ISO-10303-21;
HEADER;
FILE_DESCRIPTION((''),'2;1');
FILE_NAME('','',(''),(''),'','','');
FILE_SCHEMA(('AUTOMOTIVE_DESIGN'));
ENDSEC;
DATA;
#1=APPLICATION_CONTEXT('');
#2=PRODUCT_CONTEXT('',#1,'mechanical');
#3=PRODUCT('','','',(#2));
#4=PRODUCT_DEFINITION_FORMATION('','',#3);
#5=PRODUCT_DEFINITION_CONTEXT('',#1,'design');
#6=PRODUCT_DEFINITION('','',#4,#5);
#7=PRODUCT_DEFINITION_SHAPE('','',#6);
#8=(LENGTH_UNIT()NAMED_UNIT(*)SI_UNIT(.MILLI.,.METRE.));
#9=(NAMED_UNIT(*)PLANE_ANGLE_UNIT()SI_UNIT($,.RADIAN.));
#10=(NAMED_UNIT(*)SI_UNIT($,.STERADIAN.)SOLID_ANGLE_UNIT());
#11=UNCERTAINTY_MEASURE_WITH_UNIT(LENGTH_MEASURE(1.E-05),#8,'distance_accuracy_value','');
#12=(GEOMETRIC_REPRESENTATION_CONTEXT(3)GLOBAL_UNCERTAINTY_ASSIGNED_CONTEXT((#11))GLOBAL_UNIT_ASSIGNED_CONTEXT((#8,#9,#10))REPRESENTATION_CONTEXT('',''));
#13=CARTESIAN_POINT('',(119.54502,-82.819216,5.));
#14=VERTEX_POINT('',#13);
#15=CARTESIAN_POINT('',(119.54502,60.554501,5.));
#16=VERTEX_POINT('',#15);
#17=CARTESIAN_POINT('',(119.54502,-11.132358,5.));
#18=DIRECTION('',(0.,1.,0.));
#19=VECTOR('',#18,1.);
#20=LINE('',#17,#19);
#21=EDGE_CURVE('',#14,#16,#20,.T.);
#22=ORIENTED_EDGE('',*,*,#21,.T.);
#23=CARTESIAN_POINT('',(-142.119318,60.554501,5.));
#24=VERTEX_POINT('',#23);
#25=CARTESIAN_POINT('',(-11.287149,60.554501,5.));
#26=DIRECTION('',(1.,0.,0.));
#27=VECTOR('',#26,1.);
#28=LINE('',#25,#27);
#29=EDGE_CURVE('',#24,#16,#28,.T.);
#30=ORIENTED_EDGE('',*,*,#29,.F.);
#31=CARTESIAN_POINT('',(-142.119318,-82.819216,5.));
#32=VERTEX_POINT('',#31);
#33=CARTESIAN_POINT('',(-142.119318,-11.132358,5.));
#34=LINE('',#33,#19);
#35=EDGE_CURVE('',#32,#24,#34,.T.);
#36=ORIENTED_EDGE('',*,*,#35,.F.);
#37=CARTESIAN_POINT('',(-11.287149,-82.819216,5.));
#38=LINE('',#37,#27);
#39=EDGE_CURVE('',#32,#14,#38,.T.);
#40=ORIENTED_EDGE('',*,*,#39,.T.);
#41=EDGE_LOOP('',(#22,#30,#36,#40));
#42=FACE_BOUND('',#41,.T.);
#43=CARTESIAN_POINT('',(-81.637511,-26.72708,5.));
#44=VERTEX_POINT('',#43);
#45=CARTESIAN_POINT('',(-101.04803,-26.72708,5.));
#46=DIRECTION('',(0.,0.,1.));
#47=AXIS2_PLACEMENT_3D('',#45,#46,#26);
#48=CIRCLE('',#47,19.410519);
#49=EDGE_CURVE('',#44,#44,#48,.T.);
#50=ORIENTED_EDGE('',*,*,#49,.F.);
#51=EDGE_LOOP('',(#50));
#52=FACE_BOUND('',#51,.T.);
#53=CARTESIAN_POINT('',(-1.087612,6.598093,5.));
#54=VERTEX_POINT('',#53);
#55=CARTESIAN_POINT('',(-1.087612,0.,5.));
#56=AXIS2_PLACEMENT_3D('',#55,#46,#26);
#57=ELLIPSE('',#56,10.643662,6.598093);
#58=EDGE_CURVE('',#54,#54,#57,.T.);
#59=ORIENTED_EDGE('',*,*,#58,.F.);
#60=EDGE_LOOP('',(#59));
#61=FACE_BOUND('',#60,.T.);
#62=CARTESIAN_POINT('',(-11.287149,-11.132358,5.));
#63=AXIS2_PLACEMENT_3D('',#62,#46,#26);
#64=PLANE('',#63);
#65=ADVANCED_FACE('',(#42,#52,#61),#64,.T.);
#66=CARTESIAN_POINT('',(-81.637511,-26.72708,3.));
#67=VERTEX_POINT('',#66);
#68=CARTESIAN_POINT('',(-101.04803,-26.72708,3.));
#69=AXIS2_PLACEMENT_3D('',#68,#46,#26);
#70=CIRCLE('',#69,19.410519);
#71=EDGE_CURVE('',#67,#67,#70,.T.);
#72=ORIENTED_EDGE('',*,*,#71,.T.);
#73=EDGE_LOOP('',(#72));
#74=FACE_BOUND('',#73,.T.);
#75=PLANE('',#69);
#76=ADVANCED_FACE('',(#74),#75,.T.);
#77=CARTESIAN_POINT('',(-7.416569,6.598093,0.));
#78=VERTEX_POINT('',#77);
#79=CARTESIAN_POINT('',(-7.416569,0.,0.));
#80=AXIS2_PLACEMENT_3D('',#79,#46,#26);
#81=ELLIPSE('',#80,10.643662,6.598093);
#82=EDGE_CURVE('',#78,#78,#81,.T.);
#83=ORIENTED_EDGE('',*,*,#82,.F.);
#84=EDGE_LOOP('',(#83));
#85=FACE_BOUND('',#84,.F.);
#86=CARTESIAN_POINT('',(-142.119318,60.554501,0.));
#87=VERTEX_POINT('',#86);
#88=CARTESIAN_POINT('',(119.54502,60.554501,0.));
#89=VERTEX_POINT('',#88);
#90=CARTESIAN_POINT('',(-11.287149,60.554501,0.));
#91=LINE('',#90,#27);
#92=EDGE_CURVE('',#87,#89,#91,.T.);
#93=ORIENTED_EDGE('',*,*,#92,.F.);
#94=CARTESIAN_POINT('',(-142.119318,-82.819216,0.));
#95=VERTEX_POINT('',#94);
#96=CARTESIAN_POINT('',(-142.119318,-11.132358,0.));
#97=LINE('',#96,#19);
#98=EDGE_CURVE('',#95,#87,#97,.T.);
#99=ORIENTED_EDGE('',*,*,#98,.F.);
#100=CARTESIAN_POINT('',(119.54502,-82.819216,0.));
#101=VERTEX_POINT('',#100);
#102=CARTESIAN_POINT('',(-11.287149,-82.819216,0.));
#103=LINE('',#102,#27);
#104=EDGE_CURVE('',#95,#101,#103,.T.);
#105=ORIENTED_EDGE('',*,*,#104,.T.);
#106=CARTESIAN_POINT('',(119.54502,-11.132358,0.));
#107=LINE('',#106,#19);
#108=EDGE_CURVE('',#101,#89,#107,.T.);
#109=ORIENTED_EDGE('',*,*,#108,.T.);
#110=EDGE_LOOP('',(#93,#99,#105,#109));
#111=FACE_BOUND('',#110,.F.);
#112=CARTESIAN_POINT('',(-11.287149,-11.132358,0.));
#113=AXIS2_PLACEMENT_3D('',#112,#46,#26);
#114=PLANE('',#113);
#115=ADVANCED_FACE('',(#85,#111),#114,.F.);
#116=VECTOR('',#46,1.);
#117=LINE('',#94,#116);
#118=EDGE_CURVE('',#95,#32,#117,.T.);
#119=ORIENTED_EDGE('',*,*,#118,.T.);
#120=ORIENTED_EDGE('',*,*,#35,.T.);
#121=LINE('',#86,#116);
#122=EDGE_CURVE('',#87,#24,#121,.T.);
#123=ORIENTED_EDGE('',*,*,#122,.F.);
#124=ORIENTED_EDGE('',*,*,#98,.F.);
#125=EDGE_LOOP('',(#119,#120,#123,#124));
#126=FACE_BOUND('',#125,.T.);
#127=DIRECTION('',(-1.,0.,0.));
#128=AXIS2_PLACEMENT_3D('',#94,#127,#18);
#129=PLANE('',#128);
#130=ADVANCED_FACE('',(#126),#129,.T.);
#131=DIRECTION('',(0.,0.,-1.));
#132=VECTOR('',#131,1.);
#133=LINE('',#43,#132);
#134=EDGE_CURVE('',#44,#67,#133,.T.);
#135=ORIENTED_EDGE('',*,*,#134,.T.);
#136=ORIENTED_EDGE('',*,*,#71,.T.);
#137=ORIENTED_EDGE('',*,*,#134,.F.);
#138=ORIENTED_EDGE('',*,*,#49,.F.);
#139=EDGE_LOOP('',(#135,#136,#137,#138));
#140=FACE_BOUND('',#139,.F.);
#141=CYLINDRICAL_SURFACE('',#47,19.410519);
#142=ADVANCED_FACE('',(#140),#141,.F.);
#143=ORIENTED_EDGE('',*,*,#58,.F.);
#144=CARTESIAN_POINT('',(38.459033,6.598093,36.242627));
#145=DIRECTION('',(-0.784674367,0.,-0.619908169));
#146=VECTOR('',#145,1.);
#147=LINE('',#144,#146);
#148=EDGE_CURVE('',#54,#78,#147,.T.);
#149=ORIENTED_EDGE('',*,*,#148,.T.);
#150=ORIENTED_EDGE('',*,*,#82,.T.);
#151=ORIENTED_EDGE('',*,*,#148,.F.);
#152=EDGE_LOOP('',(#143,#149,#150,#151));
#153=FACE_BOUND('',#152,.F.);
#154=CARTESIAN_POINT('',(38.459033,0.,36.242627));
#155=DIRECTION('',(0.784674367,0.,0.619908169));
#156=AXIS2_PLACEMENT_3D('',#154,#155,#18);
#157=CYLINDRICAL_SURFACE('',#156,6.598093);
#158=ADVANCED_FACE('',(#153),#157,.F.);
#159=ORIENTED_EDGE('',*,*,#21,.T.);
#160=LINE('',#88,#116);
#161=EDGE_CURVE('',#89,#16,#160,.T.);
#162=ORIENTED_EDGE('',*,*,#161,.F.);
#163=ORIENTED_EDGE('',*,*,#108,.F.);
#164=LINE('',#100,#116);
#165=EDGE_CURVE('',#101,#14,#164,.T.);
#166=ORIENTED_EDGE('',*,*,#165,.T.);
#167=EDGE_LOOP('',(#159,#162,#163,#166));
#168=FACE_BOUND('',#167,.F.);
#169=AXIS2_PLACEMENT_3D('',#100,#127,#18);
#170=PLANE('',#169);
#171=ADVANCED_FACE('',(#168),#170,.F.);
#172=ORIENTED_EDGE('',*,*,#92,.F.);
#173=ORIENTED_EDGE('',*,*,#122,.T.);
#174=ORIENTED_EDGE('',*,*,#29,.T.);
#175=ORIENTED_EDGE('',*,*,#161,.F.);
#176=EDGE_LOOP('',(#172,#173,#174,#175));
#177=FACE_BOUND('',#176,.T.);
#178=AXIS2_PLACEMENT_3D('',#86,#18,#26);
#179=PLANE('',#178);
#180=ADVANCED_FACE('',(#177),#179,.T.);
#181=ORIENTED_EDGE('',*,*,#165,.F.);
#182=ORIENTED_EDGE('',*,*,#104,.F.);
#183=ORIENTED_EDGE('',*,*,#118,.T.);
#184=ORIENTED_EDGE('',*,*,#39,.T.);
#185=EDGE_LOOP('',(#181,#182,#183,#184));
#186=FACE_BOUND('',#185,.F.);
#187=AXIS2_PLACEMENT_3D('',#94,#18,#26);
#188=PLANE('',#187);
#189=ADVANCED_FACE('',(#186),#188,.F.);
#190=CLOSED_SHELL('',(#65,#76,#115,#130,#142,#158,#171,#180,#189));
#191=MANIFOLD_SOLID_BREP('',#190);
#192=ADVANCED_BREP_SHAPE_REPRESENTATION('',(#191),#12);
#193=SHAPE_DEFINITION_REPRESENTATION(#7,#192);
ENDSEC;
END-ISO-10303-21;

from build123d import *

# Parameters (mm, degrees)
F0_W     = 261.6643384099
F0_H     = 143.3737166226
F1_DEPTH = 5
F2_R     = 19.4105187662
F3_DEPTH = 2
F6_R     = 6.5980928428
F7_DEPTH = 96.0488122602


# Not quite as in the source:
# - a feature of the source that left no trace in its solid (it failed there, or was rolled back) is left out


with BuildPart() as f1:
    # F0 (on Top) → F1 (new body)
    with BuildSketch(Plane.XY):
        with Locations((-11.2871490419, -11.1323576421)):
            Rectangle(F0_W, F0_H)
    extrude(amount=F1_DEPTH)

    # F2 (on face) → F3 (cut)
    with BuildSketch(Plane.XY.offset(5)):
        with Locations((-101.0480299592, -26.7270803452)):
            Circle(F2_R)
    extrude(amount=-F3_DEPTH, mode=Mode.SUBTRACT)


with BuildPart() as f7:
    # F6 (on line) → F7 (new body, through all)
    with BuildSketch(Plane(origin=(41.3091172937, 0, 32.6350144213), x_dir=(0, 1, 0), z_dir=(0.7846743667, 0, 0.6199081692))):
        with Locations((0, 4.5975914841)):
            Circle(F6_R)
    extrude(amount=-F7_DEPTH)


with BuildPart() as f1_1:
    add(f1.part)

    # F8: cut F7
    add(f7.part, mode=Mode.SUBTRACT)


solid = f1_1.part
